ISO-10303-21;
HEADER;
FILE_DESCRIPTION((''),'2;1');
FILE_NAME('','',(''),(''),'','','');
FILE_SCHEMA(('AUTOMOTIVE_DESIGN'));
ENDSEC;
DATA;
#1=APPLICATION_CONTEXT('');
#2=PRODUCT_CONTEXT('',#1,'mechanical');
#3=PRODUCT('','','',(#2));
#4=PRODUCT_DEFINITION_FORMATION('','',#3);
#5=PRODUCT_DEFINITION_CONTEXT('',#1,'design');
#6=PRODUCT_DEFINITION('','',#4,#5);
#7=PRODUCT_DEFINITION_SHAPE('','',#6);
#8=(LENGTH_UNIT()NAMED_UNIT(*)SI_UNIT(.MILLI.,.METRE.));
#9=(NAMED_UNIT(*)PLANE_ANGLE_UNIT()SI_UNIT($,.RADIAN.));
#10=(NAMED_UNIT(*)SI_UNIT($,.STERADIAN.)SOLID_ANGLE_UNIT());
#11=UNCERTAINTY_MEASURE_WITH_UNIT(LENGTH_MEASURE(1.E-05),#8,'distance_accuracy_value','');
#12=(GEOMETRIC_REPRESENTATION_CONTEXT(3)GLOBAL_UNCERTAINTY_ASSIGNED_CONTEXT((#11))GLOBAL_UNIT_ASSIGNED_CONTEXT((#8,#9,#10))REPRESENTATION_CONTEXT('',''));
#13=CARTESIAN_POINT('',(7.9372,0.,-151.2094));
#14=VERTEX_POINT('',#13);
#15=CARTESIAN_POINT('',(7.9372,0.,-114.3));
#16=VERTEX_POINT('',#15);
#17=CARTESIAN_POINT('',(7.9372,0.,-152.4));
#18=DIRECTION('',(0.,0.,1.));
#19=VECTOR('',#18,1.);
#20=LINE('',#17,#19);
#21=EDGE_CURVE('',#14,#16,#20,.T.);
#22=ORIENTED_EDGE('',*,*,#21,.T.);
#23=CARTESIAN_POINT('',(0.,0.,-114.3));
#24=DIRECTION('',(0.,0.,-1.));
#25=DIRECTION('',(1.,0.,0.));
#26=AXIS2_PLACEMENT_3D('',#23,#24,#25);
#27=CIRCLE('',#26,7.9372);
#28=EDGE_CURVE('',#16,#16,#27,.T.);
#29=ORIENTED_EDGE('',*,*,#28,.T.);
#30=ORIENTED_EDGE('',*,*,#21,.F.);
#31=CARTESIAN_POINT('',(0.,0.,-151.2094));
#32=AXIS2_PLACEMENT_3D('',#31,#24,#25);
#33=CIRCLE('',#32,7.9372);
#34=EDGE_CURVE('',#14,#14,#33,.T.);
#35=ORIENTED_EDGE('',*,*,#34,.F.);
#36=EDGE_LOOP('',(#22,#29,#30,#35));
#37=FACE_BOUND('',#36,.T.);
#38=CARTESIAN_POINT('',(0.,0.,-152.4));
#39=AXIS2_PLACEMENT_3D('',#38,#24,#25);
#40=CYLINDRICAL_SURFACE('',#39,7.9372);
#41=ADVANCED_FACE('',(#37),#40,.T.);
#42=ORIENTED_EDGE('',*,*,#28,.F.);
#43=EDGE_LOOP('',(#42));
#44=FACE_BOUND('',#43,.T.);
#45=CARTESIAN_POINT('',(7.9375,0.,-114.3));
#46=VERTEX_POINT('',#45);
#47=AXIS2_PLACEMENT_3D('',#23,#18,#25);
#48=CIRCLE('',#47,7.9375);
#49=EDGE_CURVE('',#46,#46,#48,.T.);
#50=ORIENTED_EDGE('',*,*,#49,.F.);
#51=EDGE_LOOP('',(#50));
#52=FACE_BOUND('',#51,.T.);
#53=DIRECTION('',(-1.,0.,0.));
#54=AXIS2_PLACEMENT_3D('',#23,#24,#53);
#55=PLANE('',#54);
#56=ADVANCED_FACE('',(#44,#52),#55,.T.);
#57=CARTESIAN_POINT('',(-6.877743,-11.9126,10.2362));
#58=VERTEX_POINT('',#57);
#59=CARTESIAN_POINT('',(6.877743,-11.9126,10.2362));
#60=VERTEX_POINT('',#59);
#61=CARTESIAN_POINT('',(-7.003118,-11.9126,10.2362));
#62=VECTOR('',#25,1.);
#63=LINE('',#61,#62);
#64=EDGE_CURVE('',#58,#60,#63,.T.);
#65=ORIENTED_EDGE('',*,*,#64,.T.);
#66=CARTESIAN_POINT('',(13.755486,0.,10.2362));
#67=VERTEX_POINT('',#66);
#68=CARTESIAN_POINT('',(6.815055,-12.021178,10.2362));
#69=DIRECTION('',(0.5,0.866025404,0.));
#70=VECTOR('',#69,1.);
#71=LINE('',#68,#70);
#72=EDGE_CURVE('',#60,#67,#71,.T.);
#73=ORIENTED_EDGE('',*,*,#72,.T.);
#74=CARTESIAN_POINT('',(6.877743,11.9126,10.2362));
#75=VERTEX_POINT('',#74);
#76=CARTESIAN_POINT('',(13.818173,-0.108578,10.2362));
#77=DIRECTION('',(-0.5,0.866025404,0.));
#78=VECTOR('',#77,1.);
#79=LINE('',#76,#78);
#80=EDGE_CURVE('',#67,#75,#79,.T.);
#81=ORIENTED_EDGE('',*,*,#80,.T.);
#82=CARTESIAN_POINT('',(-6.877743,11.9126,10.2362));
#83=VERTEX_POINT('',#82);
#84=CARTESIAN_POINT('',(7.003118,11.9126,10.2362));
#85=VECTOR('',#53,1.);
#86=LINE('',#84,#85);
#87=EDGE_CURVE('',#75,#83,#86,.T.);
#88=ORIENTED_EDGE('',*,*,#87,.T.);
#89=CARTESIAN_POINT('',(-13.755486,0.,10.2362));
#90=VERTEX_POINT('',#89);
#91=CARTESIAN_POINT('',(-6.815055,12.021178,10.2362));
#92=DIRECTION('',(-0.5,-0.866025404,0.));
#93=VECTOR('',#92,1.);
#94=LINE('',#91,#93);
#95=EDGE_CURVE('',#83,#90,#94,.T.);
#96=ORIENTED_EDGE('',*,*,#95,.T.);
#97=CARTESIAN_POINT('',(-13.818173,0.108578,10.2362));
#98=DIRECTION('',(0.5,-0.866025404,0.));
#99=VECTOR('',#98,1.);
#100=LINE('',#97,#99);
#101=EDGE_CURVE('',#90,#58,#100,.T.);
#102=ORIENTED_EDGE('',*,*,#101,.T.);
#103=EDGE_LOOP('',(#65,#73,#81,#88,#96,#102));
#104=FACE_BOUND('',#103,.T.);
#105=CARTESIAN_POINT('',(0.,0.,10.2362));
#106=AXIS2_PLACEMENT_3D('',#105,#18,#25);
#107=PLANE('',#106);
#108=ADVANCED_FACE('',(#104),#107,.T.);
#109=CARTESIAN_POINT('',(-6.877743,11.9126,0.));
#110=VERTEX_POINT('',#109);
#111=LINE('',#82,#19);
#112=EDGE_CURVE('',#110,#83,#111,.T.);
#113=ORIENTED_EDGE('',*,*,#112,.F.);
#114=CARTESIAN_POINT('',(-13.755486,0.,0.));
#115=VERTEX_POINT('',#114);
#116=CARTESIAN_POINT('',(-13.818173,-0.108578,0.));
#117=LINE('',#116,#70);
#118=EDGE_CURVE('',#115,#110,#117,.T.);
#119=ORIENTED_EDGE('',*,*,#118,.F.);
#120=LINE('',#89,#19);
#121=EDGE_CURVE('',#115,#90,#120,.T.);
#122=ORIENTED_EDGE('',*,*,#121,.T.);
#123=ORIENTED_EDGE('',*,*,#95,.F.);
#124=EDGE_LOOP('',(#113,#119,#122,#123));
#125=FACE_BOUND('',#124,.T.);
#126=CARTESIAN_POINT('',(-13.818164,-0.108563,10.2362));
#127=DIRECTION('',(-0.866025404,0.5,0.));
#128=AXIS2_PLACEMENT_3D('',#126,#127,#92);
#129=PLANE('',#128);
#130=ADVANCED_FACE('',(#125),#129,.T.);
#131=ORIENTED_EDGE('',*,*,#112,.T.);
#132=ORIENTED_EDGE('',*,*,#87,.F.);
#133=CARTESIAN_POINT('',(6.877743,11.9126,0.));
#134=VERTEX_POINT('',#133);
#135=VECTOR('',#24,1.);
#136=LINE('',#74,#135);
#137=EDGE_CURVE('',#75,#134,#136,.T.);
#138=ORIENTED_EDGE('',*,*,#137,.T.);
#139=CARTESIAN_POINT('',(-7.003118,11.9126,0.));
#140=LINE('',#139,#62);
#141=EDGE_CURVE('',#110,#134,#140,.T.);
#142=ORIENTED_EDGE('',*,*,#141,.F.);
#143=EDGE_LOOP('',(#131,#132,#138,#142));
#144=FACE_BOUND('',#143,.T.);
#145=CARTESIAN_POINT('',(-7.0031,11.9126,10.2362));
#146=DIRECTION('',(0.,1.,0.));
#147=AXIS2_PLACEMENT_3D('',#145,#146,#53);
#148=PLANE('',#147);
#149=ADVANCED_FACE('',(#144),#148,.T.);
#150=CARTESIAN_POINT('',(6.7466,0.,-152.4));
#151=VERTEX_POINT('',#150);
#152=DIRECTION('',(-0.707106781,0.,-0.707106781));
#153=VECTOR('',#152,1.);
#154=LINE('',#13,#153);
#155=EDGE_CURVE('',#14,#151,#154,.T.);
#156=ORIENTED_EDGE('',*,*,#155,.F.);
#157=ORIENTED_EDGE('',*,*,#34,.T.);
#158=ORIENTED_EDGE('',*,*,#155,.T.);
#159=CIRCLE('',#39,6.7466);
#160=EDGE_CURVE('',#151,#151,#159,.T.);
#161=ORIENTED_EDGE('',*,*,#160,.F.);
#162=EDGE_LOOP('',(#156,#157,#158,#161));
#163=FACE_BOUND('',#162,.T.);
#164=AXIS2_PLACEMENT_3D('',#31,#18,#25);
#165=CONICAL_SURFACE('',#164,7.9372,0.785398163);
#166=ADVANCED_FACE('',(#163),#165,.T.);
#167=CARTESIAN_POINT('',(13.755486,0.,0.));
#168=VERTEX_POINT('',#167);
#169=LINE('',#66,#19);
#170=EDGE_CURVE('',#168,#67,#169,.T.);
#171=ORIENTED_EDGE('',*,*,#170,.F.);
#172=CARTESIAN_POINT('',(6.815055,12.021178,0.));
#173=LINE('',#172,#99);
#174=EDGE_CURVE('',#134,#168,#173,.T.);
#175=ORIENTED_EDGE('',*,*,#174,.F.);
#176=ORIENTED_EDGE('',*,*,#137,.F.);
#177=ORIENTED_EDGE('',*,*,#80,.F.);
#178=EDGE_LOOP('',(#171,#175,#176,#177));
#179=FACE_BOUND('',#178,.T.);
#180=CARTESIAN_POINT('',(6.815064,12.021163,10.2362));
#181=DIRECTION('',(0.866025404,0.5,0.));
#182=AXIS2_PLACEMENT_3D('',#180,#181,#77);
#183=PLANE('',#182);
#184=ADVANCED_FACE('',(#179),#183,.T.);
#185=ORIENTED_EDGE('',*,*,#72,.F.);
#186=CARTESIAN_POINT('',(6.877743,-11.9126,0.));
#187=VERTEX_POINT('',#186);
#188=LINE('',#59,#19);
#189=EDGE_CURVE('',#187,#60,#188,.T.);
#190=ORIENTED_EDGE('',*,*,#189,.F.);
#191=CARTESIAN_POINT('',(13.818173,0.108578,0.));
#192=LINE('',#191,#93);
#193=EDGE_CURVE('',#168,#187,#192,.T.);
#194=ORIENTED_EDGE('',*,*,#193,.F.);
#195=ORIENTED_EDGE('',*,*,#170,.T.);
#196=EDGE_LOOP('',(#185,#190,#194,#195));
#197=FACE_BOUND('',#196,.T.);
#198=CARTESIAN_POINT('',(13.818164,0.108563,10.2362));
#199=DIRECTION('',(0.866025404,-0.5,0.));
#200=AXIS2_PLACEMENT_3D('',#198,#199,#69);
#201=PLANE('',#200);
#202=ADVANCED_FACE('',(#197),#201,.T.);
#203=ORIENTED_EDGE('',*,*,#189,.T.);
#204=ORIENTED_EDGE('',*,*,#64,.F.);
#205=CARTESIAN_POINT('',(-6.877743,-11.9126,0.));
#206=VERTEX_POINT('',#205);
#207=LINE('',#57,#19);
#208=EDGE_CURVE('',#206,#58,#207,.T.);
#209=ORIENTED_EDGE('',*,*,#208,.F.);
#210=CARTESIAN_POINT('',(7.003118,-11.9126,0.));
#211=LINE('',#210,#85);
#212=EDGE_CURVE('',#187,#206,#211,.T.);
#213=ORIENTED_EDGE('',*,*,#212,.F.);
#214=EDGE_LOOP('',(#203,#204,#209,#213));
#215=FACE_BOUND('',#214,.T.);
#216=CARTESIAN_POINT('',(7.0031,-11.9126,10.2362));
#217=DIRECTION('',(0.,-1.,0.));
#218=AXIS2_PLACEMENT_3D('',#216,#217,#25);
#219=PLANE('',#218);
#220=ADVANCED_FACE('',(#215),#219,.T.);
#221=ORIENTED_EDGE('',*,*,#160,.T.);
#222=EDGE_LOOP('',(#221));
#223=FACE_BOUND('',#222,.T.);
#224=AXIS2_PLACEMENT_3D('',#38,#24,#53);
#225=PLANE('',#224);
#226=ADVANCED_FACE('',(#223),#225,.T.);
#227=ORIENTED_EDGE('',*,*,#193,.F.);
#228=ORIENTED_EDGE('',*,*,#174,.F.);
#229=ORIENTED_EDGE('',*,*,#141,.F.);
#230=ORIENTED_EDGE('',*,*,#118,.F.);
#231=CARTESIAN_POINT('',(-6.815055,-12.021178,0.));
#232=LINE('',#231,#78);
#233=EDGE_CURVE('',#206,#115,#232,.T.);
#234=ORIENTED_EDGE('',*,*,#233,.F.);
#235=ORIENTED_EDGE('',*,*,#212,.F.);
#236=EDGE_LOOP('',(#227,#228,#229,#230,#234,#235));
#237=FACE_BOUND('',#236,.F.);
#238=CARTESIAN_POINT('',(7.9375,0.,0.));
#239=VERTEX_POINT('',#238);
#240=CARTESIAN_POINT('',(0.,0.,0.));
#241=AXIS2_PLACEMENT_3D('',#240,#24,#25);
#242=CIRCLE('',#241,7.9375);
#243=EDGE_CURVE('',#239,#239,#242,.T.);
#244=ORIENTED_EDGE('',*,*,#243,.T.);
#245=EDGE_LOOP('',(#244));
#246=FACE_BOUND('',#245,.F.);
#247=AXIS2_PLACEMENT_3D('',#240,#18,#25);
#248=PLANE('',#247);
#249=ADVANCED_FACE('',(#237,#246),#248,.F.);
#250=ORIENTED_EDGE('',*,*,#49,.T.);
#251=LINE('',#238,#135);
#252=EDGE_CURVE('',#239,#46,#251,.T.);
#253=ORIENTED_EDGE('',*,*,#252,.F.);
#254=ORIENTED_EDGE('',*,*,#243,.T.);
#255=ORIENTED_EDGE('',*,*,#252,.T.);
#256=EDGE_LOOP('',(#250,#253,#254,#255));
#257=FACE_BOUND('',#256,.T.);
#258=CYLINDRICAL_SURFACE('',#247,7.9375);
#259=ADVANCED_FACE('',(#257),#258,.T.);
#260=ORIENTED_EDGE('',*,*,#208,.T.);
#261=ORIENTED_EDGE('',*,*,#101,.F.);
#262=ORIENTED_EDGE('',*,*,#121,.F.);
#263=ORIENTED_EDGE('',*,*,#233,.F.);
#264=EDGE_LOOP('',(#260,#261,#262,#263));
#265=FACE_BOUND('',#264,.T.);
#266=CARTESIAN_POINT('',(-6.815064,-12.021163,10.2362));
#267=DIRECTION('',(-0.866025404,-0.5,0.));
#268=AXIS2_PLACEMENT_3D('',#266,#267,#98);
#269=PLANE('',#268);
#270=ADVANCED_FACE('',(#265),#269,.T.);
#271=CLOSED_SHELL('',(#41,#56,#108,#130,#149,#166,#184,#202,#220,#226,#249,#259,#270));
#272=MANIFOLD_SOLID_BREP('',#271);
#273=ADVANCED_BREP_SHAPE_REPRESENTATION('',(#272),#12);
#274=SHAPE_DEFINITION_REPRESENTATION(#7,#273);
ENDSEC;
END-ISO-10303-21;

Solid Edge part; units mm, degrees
sketch "Sketch1" plane through (0, 0, 0) normal (0, 0, 1) x (1, 0, 0)
  circle A0 centre (0, 0) radius 13.8186
  dimension "D1" = 27.6372
extrude "Protrusion1" add sketch "Sketch1" along normal blind 10.2362
sketch "Sketch2" plane through (0, 0, 0) normal (0, 0, -1) x (1, 0, 0)
  circle A0 centre (0, 0) radius 7.9375
extrude "Protrusion2" add sketch "Sketch2" along normal blind 152.4
sketch "Sketch3" plane through (0, 0, -152.4) normal (0, 0, -1) x (1, 0, 0)
  circle A0 centre (0, 0) radius 7.9372
extrude "Cutout1" cut sketch "Sketch3" against normal blind 38.1 flip side to cut
chamfer "Chamfer_1" distance 1.1906 angle 45 1 edges at (-7.9372, 0, -152.4)
sketch "Sketch4" plane through (0, 0, 10.2362) normal (0, 0, 1) x (1, 0, 0)
  line L0 (-7.0031, 11.9126) -> (7.0031, 11.9126)
  dimension "D1" = 23.8252
extrude "Cutout2" cut sketch "Sketch4" against normal up to next material side at (0, 11.9626, 10.2362)
pattern_circular "Pattern1" count 6 over 360 about axis through (0, 0, 10.2362) along (0, 0, 1) of "Cutout2"
properties part number "24107112"
